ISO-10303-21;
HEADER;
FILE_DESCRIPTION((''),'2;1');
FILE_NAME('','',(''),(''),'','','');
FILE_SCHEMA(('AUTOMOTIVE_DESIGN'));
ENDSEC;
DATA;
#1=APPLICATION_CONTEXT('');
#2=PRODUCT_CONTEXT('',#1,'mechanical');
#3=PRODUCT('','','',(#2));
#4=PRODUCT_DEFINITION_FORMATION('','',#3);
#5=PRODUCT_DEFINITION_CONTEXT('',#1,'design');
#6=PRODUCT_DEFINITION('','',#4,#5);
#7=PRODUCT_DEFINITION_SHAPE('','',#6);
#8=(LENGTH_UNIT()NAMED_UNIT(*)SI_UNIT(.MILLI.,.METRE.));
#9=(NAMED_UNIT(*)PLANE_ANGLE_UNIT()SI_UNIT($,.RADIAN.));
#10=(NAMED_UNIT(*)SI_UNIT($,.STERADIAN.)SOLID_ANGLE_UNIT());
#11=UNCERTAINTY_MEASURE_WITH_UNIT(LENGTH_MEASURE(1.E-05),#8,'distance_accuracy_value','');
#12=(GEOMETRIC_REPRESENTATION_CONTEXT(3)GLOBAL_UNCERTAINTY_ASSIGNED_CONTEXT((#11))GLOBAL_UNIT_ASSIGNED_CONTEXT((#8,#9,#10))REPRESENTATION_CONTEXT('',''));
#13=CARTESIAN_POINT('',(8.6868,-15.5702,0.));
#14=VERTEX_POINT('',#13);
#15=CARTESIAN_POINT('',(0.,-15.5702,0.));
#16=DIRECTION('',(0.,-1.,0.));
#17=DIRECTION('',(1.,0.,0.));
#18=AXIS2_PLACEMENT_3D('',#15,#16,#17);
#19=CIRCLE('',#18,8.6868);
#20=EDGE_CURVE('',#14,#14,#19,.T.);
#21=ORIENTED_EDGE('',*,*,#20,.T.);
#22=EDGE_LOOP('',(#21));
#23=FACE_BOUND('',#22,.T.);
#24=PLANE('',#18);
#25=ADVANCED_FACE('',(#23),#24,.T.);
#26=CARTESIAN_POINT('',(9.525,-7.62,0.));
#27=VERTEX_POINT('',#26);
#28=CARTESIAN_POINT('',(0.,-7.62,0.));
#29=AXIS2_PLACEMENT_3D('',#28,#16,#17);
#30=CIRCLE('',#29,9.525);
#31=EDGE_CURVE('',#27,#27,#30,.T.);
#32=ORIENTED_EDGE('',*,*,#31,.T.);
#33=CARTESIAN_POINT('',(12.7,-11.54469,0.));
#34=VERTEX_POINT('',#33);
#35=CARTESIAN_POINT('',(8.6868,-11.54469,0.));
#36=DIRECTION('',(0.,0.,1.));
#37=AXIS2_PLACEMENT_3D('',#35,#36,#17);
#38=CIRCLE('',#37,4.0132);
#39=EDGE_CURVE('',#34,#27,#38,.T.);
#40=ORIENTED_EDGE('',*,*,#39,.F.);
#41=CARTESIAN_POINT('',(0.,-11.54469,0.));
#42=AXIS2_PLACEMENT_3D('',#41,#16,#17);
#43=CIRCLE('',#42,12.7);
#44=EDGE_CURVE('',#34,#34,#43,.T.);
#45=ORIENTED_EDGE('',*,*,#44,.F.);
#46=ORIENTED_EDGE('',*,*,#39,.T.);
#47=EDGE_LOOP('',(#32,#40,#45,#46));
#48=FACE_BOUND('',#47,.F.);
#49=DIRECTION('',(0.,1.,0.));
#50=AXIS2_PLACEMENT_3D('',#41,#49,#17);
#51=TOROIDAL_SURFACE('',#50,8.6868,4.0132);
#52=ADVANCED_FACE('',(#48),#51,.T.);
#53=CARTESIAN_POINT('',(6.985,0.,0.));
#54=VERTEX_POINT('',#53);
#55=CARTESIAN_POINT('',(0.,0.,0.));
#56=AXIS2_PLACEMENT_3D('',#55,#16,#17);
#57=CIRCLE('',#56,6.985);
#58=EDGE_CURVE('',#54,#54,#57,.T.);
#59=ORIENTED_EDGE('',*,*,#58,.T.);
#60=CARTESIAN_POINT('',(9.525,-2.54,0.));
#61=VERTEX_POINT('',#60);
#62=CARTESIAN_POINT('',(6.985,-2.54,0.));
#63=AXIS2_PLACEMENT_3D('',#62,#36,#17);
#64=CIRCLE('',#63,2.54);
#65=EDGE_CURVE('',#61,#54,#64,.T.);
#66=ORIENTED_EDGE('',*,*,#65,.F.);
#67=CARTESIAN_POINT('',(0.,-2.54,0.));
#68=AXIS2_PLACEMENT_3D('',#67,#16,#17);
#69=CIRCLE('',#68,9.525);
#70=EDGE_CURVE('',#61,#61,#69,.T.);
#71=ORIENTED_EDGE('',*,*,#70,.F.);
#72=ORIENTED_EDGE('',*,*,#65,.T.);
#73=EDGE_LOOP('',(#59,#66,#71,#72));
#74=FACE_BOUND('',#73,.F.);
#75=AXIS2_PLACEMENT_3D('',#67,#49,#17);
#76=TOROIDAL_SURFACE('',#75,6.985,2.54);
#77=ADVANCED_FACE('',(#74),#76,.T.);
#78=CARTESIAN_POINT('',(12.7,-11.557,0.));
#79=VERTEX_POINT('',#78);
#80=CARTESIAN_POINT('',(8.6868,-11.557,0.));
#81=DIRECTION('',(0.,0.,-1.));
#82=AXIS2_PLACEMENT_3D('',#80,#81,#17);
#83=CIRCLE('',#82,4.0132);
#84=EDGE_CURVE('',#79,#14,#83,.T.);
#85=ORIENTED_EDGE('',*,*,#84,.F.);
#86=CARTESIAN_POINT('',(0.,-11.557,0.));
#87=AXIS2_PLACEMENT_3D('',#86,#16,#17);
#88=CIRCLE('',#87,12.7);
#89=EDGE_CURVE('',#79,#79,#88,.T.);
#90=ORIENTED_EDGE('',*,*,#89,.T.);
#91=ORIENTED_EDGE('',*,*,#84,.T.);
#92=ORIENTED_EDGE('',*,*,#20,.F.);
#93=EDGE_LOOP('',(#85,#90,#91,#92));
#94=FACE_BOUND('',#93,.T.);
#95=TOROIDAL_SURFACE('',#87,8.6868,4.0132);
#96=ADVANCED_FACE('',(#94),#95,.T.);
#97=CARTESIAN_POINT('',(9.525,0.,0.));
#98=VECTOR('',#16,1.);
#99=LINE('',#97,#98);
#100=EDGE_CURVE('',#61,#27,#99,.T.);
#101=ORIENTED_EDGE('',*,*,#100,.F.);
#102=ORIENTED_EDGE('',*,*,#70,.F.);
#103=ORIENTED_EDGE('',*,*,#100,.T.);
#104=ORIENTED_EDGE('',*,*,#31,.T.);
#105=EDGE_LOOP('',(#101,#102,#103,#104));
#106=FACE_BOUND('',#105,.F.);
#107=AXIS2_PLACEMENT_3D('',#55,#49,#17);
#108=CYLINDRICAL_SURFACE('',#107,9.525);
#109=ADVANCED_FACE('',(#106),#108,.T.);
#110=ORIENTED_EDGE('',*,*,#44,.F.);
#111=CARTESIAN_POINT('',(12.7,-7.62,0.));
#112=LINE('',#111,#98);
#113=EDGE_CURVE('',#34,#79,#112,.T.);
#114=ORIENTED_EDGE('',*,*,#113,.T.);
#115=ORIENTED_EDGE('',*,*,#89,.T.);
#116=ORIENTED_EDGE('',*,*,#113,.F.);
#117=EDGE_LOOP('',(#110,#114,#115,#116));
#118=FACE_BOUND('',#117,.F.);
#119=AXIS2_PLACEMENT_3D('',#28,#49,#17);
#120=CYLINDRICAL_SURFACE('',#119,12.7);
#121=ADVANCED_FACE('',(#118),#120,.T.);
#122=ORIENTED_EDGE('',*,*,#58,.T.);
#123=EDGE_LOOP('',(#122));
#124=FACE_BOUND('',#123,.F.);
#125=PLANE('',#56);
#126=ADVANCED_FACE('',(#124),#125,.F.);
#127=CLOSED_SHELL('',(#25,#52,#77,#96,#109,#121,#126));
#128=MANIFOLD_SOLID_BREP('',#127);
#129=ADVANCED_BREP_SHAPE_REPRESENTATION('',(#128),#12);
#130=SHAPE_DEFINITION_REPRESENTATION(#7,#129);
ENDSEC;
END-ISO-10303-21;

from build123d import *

# Parameters (mm, degrees)
F0_R     = 9.525
F1_DEPTH = 7.62
F2_R     = 12.7
F3_DEPTH = 7.9502
F5_R     = 2.54


# Not quite as in the source:
# - a fillet or chamfer that OpenCascade refuses, or shapes differently, is made with other operations: its cross-section is extruded or revolved along the edge and cut away or added


with BuildPart() as f1:
    # F0 (on Front) → F1 (new body)
    with BuildSketch(Plane.XZ):
        Circle(F0_R)
    extrude(amount=F1_DEPTH)

    # F2 (on face) → F3 (join)
    with BuildSketch(Plane.XZ.offset(7.62)):
        Circle(F2_R)
    extrude(amount=F3_DEPTH)

    # F4: fillet of radius 4.0132 on 2 edges, made by hand

    # F4_s1 → F4_t2 (revolve, cut)
    with BuildSketch(Plane.XY):
        with BuildLine():
            ThreePointArc((12.7, -11.557), (11.5245609343, -14.3947609343), (8.6868, -15.5702))
            Line((8.6868, -15.5702), (12.7, -15.5702))
            Line((12.7, -15.5702), (12.7, -11.557))
        make_face()
    revolve(axis=Axis((0, -15.5702, 0), (0, -1, 0)), mode=Mode.SUBTRACT)

    # F4_s3 → F4_t4 (revolve, cut)
    with BuildSketch(Plane.XY):
        with BuildLine():
            ThreePointArc((12.7, -11.5446904337), (11.8068671852, -9.0206153555), (9.525, -7.62))
            Line((9.525, -7.62), (12.7, -7.62))
            Line((12.7, -7.62), (12.7, -11.5446904337))
        make_face()
    revolve(axis=Axis((0, -7.62, 0), (0, -1, 0)), mode=Mode.SUBTRACT)

    # F5
    f5_edges = [f1.edges().sort_by_distance(p)[0] for p in [
        (-9.525, 0, 0),
    ]]
    fillet(f5_edges, radius=F5_R)


solid = f1.part
